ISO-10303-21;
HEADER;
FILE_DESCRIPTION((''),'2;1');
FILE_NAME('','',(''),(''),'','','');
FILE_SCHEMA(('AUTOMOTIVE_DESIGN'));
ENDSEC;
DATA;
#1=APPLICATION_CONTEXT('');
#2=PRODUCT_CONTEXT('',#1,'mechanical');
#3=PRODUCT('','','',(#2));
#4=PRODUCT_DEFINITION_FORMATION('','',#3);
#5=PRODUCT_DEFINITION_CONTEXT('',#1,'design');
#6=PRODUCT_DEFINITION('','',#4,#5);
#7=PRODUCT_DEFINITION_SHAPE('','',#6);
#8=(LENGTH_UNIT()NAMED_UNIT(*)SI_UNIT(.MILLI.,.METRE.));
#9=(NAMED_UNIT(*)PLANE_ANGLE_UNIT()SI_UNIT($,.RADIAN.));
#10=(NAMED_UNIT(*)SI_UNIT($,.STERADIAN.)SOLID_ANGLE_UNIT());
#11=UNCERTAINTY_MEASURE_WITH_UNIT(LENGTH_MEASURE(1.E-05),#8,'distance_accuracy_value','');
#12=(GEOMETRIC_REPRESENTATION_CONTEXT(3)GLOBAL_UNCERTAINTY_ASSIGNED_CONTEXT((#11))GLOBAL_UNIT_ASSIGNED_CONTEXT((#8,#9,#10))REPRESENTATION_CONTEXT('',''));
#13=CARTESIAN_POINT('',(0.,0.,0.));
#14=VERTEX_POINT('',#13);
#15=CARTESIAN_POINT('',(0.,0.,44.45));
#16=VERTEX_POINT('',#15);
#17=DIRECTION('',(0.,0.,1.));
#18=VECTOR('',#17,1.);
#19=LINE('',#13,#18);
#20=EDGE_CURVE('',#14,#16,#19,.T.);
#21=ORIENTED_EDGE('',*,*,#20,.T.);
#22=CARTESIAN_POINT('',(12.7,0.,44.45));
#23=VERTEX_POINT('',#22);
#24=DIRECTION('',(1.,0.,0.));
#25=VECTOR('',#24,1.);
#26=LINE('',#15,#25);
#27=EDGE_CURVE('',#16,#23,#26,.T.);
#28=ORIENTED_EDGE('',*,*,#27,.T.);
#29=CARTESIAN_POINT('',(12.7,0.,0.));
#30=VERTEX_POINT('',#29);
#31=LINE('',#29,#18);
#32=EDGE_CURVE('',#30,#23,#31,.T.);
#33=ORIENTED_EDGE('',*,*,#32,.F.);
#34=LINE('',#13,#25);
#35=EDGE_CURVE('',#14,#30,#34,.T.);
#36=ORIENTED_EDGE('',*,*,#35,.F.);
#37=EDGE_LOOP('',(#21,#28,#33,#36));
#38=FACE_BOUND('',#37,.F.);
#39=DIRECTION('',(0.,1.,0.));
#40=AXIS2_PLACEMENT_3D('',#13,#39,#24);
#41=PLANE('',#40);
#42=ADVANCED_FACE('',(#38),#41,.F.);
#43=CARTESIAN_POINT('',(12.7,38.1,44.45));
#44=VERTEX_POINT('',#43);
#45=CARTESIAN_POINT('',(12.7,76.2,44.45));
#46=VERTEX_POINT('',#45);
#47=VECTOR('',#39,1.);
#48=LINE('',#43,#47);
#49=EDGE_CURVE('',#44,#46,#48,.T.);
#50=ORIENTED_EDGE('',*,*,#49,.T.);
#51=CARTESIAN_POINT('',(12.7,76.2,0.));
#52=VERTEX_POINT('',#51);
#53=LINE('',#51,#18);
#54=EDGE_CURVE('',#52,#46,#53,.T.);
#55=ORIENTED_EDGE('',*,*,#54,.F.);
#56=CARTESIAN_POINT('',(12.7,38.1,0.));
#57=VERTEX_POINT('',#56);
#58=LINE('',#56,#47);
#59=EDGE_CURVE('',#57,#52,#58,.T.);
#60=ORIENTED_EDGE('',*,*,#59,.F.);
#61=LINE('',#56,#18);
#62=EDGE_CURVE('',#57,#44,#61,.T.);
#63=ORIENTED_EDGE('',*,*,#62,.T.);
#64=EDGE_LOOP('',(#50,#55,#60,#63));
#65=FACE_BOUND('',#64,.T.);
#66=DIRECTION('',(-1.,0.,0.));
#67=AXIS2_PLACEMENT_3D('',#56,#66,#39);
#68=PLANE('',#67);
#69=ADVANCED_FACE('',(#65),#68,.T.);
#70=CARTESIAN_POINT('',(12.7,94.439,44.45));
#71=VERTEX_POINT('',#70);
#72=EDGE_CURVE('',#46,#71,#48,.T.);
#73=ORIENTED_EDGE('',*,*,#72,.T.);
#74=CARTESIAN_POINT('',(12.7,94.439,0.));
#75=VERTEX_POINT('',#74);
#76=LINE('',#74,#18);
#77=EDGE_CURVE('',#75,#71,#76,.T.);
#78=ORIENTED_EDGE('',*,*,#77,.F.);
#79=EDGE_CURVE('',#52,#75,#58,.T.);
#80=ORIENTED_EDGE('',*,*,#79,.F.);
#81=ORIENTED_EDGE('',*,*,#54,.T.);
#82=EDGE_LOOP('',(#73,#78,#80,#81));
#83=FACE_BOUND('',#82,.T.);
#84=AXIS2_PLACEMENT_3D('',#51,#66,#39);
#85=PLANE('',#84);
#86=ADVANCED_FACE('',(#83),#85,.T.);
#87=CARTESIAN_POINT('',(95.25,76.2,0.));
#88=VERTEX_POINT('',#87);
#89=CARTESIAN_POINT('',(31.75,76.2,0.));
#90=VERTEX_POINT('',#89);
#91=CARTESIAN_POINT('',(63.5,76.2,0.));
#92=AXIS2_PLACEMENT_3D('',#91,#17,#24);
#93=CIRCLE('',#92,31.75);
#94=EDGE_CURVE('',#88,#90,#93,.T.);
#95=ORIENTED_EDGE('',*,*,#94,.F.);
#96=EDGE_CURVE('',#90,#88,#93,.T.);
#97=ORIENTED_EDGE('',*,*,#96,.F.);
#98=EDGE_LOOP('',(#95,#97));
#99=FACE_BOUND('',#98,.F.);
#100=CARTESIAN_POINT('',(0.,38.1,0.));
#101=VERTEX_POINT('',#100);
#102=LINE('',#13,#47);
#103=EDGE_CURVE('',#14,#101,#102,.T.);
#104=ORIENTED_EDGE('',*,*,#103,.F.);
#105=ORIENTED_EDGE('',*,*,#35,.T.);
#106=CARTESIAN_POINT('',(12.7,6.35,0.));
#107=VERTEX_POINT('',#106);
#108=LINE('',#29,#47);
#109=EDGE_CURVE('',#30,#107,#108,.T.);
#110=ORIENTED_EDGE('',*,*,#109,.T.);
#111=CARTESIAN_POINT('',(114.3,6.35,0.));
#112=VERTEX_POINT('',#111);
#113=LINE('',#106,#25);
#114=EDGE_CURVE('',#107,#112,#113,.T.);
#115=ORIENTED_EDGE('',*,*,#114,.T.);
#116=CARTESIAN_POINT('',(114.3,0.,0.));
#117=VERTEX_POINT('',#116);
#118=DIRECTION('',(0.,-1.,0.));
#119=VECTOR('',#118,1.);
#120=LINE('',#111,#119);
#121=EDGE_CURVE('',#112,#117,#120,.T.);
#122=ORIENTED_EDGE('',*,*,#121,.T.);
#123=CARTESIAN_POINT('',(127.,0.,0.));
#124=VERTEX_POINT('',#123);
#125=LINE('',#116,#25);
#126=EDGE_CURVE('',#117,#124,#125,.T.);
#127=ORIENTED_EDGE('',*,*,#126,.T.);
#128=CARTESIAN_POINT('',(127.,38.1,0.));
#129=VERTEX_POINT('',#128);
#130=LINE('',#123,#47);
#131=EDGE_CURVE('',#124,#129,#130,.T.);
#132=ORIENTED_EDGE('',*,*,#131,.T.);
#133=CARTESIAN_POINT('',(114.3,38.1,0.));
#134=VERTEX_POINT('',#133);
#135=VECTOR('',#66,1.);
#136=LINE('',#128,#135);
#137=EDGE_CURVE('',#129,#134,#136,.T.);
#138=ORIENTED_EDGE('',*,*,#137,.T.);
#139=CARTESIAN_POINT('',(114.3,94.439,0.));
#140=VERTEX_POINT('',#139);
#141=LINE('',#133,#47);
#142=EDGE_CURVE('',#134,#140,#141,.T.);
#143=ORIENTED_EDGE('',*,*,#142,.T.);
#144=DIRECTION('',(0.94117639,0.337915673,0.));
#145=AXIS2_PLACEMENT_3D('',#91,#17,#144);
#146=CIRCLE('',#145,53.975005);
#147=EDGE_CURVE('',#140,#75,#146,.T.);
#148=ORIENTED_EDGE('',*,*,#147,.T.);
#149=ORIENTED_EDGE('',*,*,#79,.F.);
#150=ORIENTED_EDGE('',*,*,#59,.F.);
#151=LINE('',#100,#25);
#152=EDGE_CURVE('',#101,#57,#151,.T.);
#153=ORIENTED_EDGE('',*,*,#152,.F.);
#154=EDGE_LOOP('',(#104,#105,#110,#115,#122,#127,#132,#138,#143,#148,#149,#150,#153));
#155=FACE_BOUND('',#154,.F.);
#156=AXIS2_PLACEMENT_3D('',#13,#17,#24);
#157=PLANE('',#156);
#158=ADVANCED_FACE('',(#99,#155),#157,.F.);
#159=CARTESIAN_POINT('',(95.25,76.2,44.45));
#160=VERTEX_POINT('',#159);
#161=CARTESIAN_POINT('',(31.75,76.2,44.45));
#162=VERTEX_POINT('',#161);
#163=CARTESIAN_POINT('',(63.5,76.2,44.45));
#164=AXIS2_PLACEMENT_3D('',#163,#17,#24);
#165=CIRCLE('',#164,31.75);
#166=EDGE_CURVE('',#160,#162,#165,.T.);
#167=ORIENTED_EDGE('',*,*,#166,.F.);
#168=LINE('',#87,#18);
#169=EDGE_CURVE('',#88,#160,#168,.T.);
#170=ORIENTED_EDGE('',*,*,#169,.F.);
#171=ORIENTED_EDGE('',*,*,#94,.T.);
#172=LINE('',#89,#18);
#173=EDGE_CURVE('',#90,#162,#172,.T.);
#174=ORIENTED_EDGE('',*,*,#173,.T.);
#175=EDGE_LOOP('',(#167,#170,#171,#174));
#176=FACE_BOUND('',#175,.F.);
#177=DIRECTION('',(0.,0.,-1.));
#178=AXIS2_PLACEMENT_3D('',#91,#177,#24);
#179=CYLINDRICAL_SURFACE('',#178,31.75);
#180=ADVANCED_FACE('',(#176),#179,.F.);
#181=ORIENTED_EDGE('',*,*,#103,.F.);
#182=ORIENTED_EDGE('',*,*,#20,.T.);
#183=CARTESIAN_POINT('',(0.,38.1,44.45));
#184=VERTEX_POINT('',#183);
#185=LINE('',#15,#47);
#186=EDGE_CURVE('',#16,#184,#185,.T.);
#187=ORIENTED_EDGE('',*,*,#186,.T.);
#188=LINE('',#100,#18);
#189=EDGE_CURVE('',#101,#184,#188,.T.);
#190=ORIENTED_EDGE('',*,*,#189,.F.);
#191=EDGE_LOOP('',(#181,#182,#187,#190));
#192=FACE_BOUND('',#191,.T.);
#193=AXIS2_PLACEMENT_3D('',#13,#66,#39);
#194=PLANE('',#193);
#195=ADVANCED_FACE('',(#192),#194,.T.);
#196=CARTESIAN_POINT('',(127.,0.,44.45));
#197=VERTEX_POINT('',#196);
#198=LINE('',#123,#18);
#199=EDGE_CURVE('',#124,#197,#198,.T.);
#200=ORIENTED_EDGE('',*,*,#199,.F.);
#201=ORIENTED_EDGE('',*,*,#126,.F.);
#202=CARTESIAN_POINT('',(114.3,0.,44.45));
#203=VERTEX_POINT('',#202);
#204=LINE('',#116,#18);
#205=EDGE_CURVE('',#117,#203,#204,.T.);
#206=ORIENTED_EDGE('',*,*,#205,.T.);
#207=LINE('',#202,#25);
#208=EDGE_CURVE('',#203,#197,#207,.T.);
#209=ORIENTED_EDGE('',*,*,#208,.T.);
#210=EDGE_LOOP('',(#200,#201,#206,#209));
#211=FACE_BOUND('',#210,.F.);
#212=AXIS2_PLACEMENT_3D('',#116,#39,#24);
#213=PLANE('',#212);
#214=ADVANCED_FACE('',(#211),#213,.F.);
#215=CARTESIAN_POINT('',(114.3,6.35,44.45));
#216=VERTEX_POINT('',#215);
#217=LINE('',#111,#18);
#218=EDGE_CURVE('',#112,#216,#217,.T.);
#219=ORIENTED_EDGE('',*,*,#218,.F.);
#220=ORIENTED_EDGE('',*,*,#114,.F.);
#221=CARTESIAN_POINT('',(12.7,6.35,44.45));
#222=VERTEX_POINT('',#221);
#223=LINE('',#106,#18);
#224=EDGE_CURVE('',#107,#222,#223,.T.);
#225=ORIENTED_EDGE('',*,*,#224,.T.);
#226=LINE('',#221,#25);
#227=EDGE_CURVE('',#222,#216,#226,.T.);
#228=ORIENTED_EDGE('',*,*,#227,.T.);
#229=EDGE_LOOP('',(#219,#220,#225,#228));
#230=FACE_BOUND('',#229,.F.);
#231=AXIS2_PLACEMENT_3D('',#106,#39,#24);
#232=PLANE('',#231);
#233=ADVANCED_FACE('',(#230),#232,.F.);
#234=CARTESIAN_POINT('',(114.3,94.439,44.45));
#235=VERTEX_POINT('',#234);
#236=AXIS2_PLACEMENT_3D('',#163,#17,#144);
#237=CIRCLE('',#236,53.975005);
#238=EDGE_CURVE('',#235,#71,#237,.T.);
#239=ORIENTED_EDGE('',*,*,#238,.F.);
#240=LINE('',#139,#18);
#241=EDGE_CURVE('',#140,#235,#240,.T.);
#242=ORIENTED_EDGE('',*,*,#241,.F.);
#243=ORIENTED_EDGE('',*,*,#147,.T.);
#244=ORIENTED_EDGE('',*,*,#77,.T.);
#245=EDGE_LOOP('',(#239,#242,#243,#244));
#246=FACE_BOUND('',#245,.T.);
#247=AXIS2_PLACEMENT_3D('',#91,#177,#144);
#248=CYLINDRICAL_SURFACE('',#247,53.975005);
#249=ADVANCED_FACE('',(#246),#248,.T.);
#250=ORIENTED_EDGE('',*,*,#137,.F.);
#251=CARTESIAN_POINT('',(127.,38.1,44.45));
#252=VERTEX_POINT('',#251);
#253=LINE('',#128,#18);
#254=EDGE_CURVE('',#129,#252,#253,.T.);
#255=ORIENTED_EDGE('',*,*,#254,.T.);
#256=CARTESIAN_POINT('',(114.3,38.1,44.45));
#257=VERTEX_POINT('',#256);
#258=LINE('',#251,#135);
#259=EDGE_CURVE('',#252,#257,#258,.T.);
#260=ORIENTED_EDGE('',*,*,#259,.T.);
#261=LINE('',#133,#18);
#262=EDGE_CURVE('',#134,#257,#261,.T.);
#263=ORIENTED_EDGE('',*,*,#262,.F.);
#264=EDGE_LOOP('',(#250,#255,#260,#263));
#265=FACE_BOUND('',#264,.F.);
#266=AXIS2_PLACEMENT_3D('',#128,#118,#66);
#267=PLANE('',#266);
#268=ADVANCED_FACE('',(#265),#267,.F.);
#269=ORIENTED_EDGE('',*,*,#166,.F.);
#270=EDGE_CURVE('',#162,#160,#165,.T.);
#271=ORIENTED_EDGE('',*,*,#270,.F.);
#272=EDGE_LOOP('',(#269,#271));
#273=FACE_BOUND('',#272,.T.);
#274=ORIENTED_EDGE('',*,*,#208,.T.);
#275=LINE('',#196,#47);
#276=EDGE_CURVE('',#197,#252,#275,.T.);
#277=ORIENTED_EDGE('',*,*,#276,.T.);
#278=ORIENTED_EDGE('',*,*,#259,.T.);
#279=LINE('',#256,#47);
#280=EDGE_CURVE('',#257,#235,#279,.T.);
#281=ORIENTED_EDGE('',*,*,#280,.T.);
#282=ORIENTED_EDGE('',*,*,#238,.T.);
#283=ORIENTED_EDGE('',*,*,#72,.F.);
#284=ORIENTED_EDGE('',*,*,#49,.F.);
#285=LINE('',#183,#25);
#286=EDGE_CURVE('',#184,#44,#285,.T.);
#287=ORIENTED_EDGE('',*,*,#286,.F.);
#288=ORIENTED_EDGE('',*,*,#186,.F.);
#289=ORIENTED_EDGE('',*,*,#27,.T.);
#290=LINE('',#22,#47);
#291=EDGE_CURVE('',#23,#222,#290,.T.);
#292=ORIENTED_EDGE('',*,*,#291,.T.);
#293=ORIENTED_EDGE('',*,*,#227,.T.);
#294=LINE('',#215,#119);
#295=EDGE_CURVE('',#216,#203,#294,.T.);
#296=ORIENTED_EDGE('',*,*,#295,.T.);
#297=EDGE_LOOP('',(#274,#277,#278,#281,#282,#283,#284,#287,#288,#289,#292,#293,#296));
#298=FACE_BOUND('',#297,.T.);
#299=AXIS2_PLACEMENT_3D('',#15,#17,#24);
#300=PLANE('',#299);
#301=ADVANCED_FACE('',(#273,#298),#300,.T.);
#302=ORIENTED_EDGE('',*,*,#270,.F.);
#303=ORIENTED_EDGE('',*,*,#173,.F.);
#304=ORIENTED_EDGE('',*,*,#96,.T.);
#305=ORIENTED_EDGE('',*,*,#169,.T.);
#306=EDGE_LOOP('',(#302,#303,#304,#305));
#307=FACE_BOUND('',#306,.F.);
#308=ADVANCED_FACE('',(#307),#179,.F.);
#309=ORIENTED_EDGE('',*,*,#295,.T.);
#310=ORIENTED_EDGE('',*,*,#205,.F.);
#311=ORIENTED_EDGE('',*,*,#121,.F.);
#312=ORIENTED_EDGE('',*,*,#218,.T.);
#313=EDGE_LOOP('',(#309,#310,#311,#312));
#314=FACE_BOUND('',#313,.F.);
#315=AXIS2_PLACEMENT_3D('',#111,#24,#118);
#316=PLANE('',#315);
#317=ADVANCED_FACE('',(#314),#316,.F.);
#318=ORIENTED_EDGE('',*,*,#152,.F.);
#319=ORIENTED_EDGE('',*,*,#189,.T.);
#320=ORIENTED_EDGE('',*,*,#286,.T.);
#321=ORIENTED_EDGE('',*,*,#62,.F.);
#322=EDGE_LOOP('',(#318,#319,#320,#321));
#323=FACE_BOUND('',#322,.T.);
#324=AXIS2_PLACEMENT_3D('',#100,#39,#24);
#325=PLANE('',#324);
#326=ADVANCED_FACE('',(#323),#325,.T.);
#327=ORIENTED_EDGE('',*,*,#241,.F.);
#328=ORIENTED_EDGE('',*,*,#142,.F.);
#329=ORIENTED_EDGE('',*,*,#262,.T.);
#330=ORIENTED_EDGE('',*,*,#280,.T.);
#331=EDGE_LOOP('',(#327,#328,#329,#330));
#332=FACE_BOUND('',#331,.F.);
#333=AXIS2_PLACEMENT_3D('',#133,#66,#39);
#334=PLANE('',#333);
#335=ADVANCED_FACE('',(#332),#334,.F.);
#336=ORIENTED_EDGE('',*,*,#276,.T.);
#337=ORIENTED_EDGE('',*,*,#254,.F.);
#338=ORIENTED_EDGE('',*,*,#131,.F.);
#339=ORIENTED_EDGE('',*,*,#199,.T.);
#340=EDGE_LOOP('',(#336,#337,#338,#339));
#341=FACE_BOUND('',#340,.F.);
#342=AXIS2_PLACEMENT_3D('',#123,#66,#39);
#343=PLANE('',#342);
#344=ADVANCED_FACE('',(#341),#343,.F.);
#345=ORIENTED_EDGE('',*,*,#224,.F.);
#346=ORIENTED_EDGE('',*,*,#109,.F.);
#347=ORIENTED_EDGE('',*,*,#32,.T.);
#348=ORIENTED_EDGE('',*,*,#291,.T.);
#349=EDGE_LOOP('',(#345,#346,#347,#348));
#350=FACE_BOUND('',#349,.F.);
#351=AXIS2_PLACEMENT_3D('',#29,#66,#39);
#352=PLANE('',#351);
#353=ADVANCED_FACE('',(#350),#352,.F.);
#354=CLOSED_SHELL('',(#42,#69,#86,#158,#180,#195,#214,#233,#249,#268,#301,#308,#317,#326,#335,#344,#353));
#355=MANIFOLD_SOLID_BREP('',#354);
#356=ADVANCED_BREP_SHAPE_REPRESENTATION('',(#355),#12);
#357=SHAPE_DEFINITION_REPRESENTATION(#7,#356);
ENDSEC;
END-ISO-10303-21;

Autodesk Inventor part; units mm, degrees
ref_plane "YZ Plane" through (0, 0, 0) normal (1, 0, 0) x (0, 1, 0)
ref_plane "XZ Plane" through (0, 0, 0) normal (0, 1, 0) x (-1, 0, 0)
ref_plane "XY Plane" through (0, 0, 0) normal (0, 0, 1) x (1, 0, 0)
sketch "Sketch1" plane through (0, 0, 0) normal (0, 0, 1) x (1, 0, 0)
  line L0 (0, 0) -> (12.7, 0)
  line L1 (12.7, 0) -> (12.7, 6.35)
  line L2 (12.7, 6.35) -> (114.3, 6.35)
  line L3 (114.3, 6.35) -> (114.3, 0)
  line L4 (114.3, 0) -> (127, 0)
  line L5 (127, 0) -> (127, 38.1)
  line L6 (127, 38.1) -> (114.3, 38.1)
  line L7 (0, 38.1) -> (12.7, 38.1)
  line L8 (0, 0) -> (0, 76.2)
  line L9 (0, 76.2) -> (63.5, 76.2)
  circle A0 centre (63.5, 76.2) radius 31.75
  arc A1 (114.3, 94.439) -> (12.7, 94.439) centre (63.5, 76.2) ccw
  line L10 (12.7, 38.1) -> (12.7, 94.439)
  line L11 (114.3, 38.1) -> (114.3, 94.439)
  dimension "d0" = 12.7
  dimension "d1" = 6.35
  dimension "d2" = 101.6
  dimension "d3" = 6.35
  dimension "d4" = 12.7
  dimension "d5" = 38.1
  dimension "d6" = 12.7
  dimension "d7" = 38.1
  dimension "d8" = 12.7
  dimension "d9" = 76.2
  dimension "d10" = 63.5
  dimension "d11" = 63.5
  dimension "d12" = 107.95
extrude "Extrusion1" add sketch "Sketch1" along normal blind 44.45 contours L8 L7 L10 A1 L11 L6 L5 L4 L3 L2 L1 L0
properties part number "Assignment 2.5 - Guide Silder"
